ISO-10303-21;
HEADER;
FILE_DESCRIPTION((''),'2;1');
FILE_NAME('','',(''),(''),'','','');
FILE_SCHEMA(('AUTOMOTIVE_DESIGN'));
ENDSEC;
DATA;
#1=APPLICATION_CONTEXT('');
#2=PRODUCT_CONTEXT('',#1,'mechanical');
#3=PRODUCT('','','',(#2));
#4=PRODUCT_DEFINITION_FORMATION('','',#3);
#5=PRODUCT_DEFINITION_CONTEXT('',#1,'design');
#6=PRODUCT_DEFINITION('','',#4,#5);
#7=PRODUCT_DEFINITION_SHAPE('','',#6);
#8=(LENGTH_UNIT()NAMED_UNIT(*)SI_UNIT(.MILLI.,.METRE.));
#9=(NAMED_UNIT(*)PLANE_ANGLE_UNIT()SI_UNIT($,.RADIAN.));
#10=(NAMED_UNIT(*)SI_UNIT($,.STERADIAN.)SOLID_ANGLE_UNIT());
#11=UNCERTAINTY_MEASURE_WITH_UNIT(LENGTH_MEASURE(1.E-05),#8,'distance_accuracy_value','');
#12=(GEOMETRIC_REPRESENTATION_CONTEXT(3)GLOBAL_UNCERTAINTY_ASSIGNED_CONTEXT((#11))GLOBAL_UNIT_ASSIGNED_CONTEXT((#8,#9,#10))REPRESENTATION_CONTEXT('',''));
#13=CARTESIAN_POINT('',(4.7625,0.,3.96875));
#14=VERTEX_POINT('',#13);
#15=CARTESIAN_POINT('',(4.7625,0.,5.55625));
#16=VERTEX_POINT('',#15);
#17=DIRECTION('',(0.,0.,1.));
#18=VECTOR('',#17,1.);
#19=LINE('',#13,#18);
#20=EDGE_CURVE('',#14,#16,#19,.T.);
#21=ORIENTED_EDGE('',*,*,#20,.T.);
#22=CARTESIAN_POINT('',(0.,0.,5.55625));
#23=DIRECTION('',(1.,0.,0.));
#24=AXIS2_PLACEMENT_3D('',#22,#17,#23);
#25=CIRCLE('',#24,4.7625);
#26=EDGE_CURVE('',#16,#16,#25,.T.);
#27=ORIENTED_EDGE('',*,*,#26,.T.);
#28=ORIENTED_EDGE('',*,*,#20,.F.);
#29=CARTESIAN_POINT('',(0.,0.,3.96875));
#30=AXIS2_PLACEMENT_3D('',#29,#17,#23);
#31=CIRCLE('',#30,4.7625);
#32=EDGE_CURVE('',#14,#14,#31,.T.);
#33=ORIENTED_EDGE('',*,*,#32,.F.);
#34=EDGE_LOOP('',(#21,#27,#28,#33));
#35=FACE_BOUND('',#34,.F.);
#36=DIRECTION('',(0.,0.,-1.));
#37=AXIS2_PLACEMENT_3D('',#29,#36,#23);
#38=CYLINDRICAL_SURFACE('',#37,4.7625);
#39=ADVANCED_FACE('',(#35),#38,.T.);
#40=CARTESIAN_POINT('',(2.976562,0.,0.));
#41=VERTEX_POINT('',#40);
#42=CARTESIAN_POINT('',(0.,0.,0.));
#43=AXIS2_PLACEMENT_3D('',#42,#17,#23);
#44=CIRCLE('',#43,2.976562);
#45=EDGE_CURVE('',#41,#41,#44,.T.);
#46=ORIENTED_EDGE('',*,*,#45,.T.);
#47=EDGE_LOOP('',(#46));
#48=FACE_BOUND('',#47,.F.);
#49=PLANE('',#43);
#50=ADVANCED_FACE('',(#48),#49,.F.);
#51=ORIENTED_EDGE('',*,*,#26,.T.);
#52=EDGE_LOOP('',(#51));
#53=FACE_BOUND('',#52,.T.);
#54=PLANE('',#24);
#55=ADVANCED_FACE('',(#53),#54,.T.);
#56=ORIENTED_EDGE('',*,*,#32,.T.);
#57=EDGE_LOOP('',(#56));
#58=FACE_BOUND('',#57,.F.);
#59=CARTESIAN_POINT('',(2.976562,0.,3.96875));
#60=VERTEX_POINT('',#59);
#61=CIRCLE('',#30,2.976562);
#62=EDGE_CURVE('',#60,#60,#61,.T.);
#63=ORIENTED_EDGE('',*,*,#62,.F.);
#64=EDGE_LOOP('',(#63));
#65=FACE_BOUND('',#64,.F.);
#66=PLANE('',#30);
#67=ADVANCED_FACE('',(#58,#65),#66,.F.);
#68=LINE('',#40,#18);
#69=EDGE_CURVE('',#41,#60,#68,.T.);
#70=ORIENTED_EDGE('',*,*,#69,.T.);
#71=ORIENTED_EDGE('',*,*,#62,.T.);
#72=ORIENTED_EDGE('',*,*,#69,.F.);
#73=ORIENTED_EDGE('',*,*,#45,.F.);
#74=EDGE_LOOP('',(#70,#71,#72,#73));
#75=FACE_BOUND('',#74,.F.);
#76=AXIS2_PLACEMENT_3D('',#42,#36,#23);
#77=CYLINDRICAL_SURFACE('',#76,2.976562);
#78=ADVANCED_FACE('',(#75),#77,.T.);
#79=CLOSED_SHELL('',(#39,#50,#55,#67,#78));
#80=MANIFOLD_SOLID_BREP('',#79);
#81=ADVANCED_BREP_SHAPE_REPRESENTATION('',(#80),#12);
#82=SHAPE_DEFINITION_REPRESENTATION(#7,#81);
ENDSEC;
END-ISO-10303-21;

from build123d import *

# Parameters (mm, degrees)
F0_R     = 2.9765625
F1_DEPTH = 3.96875
F2_R     = 4.7625
F3_DEPTH = 1.5875


# Not quite as in the source:
# - a length typed as a fraction of an inch, garbled in the dataset ("3 / 203.2 mm" for 3/8 in), is restored


with BuildPart() as f1:
    # F0 (on Top) → F1 (new body)
    with BuildSketch(Plane.XY):
        Circle(F0_R)
    extrude(amount=F1_DEPTH)

    # F2 (on face) → F3 (join)
    with BuildSketch(Plane.XY.offset(3.96875)):
        Circle(F2_R)
    extrude(amount=F3_DEPTH)


solid = f1.part
